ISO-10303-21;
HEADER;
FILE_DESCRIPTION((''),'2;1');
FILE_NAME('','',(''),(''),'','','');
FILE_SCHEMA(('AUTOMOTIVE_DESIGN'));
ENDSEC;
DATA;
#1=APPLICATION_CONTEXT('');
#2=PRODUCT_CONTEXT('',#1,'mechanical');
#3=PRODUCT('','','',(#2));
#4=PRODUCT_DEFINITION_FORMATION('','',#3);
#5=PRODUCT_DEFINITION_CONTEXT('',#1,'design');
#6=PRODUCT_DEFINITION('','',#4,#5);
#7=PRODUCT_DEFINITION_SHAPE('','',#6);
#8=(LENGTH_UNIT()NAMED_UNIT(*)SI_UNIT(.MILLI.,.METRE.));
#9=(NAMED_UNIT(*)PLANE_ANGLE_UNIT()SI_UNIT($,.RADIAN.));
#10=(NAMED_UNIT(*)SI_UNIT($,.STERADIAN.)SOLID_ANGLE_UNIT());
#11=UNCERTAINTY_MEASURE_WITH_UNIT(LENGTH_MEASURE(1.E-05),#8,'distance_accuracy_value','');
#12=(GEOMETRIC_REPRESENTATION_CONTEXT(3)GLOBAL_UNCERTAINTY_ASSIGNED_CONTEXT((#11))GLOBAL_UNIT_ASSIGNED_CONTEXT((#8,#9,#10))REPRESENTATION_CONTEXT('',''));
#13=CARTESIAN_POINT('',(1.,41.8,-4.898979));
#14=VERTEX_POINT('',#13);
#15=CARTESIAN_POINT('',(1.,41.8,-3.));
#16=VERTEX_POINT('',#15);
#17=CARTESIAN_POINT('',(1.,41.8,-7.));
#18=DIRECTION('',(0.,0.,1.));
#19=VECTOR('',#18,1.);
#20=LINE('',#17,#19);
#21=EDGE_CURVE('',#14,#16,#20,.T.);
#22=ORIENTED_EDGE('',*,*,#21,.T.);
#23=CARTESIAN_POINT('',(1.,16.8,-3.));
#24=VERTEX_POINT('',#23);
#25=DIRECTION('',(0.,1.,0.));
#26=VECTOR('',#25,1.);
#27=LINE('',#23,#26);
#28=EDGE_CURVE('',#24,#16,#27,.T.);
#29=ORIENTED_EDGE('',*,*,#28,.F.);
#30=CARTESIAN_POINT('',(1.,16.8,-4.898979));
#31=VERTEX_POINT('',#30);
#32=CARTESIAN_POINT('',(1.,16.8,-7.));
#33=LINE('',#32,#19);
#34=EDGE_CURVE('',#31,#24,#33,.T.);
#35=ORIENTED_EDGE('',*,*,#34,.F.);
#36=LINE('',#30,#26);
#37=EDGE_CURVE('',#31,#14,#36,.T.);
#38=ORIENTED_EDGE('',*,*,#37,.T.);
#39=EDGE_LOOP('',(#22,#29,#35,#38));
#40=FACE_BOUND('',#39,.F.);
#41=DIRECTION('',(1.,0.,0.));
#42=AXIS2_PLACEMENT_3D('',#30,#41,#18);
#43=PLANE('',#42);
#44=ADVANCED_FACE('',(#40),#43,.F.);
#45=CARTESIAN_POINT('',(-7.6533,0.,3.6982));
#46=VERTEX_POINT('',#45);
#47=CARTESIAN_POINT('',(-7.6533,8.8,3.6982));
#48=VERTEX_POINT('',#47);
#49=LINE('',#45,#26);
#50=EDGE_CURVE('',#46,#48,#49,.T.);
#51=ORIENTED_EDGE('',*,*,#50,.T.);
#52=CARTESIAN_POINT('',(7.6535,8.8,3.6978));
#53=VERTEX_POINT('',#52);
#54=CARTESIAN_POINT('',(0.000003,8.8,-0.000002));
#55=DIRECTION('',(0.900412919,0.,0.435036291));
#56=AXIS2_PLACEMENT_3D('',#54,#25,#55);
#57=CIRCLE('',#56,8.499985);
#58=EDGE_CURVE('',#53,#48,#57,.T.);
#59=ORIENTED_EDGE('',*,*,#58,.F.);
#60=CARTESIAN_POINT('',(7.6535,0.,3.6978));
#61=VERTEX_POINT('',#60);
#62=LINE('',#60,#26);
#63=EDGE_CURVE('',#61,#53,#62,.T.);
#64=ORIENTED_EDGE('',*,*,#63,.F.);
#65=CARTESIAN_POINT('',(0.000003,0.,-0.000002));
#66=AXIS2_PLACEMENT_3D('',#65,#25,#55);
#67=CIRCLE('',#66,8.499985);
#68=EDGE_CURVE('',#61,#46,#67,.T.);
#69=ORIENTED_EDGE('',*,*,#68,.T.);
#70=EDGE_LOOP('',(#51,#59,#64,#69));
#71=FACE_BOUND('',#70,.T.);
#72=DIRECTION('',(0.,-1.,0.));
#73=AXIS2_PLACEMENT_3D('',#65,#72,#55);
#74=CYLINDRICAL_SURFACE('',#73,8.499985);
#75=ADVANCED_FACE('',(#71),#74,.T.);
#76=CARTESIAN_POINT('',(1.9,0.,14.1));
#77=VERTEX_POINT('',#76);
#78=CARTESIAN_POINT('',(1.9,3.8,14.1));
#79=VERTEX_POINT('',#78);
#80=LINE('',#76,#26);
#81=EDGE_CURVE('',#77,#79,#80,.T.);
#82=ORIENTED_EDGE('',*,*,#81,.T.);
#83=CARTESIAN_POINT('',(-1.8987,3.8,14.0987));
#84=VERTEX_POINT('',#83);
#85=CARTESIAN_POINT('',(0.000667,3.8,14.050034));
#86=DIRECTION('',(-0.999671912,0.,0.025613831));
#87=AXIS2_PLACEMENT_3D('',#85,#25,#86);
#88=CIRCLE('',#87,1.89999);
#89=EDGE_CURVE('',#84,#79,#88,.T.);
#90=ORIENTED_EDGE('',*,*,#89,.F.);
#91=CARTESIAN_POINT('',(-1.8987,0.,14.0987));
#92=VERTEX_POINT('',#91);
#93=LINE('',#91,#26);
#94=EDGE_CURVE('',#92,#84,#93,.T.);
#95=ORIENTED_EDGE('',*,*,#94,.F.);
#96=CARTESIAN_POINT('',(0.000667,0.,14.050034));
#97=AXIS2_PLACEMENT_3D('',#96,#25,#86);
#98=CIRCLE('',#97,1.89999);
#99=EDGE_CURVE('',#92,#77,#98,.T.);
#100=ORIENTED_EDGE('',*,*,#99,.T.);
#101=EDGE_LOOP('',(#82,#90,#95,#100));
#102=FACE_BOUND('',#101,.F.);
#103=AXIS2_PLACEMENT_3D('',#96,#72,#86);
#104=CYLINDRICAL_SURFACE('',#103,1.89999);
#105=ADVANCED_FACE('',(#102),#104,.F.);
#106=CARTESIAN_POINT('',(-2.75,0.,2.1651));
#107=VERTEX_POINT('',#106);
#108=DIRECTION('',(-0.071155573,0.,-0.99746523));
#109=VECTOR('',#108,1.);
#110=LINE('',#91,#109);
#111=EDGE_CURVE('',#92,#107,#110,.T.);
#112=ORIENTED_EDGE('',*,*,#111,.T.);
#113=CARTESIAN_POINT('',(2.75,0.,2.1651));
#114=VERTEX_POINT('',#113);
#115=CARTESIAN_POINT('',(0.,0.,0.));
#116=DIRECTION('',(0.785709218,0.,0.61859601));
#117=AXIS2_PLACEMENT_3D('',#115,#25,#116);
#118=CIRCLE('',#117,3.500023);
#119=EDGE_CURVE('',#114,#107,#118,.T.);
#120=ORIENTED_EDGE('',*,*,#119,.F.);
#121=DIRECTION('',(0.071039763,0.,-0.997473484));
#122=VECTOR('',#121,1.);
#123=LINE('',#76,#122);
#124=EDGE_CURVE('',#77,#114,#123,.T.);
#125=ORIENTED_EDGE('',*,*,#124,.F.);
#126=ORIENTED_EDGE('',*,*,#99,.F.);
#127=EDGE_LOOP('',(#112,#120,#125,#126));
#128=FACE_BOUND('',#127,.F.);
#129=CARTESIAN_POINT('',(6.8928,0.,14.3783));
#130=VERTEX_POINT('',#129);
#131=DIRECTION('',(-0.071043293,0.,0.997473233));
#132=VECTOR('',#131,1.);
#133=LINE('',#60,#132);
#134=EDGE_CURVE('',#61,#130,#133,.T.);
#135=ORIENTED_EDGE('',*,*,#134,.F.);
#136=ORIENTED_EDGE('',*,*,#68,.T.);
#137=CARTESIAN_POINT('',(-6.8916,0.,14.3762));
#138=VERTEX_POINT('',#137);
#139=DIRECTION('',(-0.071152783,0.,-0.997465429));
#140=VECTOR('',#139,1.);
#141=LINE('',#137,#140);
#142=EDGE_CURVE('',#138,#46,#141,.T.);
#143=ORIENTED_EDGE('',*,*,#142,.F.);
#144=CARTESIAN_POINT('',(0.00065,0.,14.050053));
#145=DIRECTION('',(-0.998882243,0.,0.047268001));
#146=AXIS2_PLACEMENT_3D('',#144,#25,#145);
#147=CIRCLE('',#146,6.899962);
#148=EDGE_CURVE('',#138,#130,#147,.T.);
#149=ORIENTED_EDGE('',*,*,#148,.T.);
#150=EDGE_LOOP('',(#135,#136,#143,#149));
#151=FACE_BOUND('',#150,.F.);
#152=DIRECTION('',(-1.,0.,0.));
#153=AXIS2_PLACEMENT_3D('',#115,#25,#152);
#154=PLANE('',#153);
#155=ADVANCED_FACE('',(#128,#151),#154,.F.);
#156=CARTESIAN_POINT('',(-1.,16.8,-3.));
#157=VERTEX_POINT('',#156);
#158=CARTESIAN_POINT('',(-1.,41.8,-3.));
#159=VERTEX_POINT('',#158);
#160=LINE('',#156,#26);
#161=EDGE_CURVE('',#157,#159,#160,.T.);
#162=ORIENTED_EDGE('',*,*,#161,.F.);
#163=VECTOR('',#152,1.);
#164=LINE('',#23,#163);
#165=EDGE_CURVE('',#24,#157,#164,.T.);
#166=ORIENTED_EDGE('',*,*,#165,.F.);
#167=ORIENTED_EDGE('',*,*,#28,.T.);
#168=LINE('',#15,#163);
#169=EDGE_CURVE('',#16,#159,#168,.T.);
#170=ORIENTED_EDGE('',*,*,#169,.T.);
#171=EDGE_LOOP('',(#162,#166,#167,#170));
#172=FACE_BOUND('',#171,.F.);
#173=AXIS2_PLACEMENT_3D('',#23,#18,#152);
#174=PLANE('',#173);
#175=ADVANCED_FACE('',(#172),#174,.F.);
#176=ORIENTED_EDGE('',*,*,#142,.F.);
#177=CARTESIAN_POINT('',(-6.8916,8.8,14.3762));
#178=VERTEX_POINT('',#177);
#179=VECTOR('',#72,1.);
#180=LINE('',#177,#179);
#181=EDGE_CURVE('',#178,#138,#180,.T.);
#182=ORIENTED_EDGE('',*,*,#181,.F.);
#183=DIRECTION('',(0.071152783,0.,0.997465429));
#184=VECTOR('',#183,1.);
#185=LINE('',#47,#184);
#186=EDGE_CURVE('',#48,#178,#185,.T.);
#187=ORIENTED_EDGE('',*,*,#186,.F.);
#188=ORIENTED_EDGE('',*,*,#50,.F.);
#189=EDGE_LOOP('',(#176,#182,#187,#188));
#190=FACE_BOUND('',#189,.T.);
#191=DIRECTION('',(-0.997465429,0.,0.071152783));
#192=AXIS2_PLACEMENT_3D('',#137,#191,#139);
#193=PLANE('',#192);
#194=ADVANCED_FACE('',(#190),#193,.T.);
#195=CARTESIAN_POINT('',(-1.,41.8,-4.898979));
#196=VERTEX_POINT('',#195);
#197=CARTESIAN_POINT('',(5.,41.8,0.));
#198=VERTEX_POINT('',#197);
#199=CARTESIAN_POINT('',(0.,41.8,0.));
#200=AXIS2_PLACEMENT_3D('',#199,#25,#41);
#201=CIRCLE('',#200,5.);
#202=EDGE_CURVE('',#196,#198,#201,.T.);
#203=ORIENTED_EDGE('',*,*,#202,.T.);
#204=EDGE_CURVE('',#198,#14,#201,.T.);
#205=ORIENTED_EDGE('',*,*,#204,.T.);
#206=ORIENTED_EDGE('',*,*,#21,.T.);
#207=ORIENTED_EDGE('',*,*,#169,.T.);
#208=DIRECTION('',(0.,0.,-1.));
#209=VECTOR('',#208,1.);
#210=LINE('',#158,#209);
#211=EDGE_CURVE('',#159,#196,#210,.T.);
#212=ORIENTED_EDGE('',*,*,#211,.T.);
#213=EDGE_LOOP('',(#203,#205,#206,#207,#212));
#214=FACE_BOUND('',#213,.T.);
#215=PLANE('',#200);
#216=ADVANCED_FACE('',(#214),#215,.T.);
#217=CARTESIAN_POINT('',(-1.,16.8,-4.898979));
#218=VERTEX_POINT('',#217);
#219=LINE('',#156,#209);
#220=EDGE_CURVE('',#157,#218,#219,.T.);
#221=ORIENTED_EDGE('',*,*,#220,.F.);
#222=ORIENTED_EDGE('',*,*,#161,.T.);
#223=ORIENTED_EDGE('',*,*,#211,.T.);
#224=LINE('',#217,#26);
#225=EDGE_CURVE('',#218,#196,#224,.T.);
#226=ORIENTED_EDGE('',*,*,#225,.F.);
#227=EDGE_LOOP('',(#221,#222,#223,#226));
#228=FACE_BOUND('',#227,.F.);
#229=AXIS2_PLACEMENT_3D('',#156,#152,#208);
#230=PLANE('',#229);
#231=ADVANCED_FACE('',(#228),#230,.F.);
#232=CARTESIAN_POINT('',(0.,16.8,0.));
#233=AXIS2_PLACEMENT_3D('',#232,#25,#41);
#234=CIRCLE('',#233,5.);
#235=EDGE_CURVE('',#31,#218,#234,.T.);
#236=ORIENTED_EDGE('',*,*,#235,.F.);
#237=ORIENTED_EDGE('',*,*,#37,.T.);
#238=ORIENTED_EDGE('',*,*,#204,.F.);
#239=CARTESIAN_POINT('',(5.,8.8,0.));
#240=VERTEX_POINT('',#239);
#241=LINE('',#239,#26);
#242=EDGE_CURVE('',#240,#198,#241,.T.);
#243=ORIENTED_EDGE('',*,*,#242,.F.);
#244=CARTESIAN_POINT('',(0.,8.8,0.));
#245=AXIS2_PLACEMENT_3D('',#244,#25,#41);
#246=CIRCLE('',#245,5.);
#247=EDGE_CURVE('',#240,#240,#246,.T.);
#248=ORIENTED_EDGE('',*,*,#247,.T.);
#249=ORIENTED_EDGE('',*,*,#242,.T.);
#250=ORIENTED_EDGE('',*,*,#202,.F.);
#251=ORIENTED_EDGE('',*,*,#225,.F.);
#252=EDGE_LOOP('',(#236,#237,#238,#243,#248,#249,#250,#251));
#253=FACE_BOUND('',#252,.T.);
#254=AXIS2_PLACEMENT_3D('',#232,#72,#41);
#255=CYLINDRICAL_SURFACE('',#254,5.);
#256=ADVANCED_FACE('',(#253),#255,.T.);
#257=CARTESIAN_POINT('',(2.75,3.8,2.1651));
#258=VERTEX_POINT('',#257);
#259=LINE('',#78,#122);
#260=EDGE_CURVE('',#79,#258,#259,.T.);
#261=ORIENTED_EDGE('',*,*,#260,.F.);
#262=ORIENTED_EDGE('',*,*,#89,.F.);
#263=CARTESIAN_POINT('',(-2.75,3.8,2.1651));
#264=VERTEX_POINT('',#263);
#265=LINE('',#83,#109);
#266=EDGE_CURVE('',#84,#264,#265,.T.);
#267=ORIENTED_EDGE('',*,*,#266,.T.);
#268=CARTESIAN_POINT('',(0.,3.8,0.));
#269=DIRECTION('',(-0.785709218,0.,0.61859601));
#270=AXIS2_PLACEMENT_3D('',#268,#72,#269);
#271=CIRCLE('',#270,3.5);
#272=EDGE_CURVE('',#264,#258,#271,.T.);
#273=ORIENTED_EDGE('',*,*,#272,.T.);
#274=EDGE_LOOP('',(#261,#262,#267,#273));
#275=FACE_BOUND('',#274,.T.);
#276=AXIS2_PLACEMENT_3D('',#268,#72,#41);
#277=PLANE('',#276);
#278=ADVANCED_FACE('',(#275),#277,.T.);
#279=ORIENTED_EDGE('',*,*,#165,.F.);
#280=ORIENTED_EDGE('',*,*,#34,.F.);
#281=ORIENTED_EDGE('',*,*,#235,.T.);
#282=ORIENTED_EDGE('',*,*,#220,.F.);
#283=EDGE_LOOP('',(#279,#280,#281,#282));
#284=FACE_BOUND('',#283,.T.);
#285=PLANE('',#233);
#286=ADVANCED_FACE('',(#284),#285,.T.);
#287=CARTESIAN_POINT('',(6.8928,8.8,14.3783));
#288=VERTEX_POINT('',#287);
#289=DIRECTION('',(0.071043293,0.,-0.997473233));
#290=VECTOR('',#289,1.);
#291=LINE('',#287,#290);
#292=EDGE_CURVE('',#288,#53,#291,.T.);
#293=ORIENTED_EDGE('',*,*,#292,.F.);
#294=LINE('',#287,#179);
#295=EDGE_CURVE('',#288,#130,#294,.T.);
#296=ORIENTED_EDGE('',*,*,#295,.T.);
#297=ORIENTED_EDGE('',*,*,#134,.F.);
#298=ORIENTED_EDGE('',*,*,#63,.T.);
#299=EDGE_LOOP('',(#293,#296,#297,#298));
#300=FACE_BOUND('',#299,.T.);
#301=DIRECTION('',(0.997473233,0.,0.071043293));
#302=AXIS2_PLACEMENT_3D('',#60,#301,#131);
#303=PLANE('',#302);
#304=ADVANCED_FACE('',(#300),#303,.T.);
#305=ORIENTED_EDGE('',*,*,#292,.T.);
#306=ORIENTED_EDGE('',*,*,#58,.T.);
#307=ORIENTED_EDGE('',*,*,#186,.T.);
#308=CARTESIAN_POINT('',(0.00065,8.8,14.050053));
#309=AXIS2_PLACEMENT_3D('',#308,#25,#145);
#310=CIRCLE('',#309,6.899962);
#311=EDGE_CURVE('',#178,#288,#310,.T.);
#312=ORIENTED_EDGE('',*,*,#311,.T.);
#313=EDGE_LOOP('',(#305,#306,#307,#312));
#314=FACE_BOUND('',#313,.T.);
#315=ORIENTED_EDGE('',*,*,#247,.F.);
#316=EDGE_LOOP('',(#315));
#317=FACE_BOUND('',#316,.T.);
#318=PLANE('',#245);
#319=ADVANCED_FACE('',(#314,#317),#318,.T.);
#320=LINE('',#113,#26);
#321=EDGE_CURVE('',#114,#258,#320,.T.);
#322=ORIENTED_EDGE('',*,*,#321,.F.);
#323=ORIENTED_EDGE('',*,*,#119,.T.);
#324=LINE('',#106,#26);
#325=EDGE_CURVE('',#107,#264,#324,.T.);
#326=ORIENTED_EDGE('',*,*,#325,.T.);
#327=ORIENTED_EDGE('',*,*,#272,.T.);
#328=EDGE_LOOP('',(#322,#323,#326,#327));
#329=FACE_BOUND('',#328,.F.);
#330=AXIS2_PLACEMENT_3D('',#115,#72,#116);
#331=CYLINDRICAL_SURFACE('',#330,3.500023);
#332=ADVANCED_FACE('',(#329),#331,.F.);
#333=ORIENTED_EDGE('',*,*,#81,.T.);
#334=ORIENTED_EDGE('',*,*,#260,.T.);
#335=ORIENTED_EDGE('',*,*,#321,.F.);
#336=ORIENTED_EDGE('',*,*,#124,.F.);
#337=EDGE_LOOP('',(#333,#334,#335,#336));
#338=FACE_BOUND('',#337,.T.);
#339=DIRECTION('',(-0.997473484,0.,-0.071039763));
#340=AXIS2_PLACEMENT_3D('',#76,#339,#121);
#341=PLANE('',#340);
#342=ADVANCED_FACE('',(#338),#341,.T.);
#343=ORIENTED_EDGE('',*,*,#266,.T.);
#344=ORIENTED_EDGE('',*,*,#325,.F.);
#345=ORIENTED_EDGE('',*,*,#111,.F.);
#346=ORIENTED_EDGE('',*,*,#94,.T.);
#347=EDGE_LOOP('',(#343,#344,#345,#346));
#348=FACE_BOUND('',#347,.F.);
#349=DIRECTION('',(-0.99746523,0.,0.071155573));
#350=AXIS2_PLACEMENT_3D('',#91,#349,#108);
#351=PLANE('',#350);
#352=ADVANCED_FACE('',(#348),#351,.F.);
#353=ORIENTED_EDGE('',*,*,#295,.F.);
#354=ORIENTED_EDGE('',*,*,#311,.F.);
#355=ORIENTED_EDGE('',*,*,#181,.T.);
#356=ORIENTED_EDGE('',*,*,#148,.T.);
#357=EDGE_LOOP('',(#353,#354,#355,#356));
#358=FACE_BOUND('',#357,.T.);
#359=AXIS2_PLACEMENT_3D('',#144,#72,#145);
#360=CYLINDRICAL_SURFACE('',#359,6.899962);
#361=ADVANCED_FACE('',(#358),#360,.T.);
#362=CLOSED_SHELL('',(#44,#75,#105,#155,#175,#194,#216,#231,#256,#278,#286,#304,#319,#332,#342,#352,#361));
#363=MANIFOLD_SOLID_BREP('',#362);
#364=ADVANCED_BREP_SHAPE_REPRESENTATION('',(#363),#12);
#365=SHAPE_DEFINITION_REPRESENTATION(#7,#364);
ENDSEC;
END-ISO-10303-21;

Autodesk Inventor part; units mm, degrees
ref_plane "YZ Plane" through (0, 0, 0) normal (1, 0, 0) x (0, 1, 0)
ref_plane "XZ Plane" through (0, 0, 0) normal (0, 1, 0) x (-1, 0, 0)
ref_plane "XY Plane" through (0, 0, 0) normal (0, 0, 1) x (1, 0, 0)
sketch "Sketch1" plane through (0, 0, 0) normal (0, 1, 0) x (-1, 0, 0)
  arc A0 (-2.75, 2.1651) -> (2.75, 2.1651) centre (0, 0) ccw
  line L0 (-1.9, 14.1) -> (-2.75, 2.1651)
  line L1 (1.8987, 14.0987) -> (2.75, 2.1651)
  arc A1 (1.8987, 14.0987) -> (-1.9, 14.1) centre (-0.0007, 14.05) ccw
  circle A2 centre (0, 0) radius 0.5
  arc A3 (-7.6535, 3.6978) -> (7.6533, 3.6982) centre (0, 0) ccw
  line L2 (-7.6535, 3.6978) -> (-6.8928, 14.3783)
  arc A4 (6.8916, 14.3762) -> (-6.8928, 14.3783) centre (-0.0007, 14.05) ccw
  line L3 (6.8916, 14.3762) -> (7.6533, 3.6982)
  point P0 (0, 15.95)
  dimension "d0" = 1
  dimension "d9" = 1.9
  dimension "d10" = 15.95
  dimension "d11" = 3.5
  dimension "d17" = 5
extrude "Extrusion1" add sketch "Sketch1" along normal blind 3.8 contours L2 A4 L3 A3
sketch "Sketch2" plane through (0, 3.8, 0) normal (0, 1, 0) x (1, 0, 0)
  arc A0 (2.75, -2.1651) -> (-2.75, -2.1651) centre (0, 0) ccw projected
  circle A1 centre (0, 0) radius 3.5
  arc A2 (-6.8916, -14.3762) -> (6.8928, -14.3783) centre (0.0007, -14.05) ccw projected
  line L0 (-7.6533, -3.6982) -> (-6.8916, -14.3762) projected
  arc A3 (7.6535, -3.6978) -> (-7.6533, -3.6982) centre (0, 0) ccw projected
  line L1 (6.8928, -14.3783) -> (7.6535, -3.6978) projected
  arc A4 (2.75, -2.1651) -> (-2.75, -2.1651) centre (0, 0) ccw projected
  point P0 (2.75, -2.1651)
  point P1 (-2.75, -2.1651)
extrude "Extrusion2" add sketch "Sketch2" along normal blind 5
sketch "Sketch3" plane through (0, 8.8, 0) normal (0, 1, 0) x (1, 0, 0)
  arc A0 (2.75, -2.1651) -> (-2.75, -2.1651) centre (0, 0) ccw projected
  circle A1 centre (0, 0) radius 5
  dimension "d22" = 10
extrude "Extrusion3" add sketch "Sketch3" along normal blind 8
sketch "Sketch4" plane through (0, 16.8, 0) normal (0, 1, 0) x (1, 0, 0)
  circle A0 centre (0, 0) radius 5
  line L0 (1, 3) -> (-1, 3)
  line L1 (-1, 3) -> (-1, 7)
  line L2 (-1, 7) -> (1, 7)
  line L3 (1, 7) -> (1, 3)
  line L4 (1, 3) -> (-1, 7) construction
  line L5 (-1, 3) -> (1, 7) construction
  point P0 (0, 5)
  point P1 (-1, 4.899)
  point P2 (1, 4.899)
  dimension "d25" = 10
  dimension "d26" = 2
  dimension "d27" = 4
  dimension "d28" = 1
extrude "Extrusion4" add sketch "Sketch4" along normal blind 25 contours A0 L1 L0 L3 picked at (-0.1517, 0.3403)
sketch "Sketch5" plane through (0, 3.8, 0) normal (0, -1, 0) x (1, 0, 0)
  circle A0 centre (0, 0) radius 3.5
  dimension "d31" = 7
extrude "Extrusion5" add sketch "Sketch5" against normal blind 5
properties part number "Servo_Shaft_V2"
